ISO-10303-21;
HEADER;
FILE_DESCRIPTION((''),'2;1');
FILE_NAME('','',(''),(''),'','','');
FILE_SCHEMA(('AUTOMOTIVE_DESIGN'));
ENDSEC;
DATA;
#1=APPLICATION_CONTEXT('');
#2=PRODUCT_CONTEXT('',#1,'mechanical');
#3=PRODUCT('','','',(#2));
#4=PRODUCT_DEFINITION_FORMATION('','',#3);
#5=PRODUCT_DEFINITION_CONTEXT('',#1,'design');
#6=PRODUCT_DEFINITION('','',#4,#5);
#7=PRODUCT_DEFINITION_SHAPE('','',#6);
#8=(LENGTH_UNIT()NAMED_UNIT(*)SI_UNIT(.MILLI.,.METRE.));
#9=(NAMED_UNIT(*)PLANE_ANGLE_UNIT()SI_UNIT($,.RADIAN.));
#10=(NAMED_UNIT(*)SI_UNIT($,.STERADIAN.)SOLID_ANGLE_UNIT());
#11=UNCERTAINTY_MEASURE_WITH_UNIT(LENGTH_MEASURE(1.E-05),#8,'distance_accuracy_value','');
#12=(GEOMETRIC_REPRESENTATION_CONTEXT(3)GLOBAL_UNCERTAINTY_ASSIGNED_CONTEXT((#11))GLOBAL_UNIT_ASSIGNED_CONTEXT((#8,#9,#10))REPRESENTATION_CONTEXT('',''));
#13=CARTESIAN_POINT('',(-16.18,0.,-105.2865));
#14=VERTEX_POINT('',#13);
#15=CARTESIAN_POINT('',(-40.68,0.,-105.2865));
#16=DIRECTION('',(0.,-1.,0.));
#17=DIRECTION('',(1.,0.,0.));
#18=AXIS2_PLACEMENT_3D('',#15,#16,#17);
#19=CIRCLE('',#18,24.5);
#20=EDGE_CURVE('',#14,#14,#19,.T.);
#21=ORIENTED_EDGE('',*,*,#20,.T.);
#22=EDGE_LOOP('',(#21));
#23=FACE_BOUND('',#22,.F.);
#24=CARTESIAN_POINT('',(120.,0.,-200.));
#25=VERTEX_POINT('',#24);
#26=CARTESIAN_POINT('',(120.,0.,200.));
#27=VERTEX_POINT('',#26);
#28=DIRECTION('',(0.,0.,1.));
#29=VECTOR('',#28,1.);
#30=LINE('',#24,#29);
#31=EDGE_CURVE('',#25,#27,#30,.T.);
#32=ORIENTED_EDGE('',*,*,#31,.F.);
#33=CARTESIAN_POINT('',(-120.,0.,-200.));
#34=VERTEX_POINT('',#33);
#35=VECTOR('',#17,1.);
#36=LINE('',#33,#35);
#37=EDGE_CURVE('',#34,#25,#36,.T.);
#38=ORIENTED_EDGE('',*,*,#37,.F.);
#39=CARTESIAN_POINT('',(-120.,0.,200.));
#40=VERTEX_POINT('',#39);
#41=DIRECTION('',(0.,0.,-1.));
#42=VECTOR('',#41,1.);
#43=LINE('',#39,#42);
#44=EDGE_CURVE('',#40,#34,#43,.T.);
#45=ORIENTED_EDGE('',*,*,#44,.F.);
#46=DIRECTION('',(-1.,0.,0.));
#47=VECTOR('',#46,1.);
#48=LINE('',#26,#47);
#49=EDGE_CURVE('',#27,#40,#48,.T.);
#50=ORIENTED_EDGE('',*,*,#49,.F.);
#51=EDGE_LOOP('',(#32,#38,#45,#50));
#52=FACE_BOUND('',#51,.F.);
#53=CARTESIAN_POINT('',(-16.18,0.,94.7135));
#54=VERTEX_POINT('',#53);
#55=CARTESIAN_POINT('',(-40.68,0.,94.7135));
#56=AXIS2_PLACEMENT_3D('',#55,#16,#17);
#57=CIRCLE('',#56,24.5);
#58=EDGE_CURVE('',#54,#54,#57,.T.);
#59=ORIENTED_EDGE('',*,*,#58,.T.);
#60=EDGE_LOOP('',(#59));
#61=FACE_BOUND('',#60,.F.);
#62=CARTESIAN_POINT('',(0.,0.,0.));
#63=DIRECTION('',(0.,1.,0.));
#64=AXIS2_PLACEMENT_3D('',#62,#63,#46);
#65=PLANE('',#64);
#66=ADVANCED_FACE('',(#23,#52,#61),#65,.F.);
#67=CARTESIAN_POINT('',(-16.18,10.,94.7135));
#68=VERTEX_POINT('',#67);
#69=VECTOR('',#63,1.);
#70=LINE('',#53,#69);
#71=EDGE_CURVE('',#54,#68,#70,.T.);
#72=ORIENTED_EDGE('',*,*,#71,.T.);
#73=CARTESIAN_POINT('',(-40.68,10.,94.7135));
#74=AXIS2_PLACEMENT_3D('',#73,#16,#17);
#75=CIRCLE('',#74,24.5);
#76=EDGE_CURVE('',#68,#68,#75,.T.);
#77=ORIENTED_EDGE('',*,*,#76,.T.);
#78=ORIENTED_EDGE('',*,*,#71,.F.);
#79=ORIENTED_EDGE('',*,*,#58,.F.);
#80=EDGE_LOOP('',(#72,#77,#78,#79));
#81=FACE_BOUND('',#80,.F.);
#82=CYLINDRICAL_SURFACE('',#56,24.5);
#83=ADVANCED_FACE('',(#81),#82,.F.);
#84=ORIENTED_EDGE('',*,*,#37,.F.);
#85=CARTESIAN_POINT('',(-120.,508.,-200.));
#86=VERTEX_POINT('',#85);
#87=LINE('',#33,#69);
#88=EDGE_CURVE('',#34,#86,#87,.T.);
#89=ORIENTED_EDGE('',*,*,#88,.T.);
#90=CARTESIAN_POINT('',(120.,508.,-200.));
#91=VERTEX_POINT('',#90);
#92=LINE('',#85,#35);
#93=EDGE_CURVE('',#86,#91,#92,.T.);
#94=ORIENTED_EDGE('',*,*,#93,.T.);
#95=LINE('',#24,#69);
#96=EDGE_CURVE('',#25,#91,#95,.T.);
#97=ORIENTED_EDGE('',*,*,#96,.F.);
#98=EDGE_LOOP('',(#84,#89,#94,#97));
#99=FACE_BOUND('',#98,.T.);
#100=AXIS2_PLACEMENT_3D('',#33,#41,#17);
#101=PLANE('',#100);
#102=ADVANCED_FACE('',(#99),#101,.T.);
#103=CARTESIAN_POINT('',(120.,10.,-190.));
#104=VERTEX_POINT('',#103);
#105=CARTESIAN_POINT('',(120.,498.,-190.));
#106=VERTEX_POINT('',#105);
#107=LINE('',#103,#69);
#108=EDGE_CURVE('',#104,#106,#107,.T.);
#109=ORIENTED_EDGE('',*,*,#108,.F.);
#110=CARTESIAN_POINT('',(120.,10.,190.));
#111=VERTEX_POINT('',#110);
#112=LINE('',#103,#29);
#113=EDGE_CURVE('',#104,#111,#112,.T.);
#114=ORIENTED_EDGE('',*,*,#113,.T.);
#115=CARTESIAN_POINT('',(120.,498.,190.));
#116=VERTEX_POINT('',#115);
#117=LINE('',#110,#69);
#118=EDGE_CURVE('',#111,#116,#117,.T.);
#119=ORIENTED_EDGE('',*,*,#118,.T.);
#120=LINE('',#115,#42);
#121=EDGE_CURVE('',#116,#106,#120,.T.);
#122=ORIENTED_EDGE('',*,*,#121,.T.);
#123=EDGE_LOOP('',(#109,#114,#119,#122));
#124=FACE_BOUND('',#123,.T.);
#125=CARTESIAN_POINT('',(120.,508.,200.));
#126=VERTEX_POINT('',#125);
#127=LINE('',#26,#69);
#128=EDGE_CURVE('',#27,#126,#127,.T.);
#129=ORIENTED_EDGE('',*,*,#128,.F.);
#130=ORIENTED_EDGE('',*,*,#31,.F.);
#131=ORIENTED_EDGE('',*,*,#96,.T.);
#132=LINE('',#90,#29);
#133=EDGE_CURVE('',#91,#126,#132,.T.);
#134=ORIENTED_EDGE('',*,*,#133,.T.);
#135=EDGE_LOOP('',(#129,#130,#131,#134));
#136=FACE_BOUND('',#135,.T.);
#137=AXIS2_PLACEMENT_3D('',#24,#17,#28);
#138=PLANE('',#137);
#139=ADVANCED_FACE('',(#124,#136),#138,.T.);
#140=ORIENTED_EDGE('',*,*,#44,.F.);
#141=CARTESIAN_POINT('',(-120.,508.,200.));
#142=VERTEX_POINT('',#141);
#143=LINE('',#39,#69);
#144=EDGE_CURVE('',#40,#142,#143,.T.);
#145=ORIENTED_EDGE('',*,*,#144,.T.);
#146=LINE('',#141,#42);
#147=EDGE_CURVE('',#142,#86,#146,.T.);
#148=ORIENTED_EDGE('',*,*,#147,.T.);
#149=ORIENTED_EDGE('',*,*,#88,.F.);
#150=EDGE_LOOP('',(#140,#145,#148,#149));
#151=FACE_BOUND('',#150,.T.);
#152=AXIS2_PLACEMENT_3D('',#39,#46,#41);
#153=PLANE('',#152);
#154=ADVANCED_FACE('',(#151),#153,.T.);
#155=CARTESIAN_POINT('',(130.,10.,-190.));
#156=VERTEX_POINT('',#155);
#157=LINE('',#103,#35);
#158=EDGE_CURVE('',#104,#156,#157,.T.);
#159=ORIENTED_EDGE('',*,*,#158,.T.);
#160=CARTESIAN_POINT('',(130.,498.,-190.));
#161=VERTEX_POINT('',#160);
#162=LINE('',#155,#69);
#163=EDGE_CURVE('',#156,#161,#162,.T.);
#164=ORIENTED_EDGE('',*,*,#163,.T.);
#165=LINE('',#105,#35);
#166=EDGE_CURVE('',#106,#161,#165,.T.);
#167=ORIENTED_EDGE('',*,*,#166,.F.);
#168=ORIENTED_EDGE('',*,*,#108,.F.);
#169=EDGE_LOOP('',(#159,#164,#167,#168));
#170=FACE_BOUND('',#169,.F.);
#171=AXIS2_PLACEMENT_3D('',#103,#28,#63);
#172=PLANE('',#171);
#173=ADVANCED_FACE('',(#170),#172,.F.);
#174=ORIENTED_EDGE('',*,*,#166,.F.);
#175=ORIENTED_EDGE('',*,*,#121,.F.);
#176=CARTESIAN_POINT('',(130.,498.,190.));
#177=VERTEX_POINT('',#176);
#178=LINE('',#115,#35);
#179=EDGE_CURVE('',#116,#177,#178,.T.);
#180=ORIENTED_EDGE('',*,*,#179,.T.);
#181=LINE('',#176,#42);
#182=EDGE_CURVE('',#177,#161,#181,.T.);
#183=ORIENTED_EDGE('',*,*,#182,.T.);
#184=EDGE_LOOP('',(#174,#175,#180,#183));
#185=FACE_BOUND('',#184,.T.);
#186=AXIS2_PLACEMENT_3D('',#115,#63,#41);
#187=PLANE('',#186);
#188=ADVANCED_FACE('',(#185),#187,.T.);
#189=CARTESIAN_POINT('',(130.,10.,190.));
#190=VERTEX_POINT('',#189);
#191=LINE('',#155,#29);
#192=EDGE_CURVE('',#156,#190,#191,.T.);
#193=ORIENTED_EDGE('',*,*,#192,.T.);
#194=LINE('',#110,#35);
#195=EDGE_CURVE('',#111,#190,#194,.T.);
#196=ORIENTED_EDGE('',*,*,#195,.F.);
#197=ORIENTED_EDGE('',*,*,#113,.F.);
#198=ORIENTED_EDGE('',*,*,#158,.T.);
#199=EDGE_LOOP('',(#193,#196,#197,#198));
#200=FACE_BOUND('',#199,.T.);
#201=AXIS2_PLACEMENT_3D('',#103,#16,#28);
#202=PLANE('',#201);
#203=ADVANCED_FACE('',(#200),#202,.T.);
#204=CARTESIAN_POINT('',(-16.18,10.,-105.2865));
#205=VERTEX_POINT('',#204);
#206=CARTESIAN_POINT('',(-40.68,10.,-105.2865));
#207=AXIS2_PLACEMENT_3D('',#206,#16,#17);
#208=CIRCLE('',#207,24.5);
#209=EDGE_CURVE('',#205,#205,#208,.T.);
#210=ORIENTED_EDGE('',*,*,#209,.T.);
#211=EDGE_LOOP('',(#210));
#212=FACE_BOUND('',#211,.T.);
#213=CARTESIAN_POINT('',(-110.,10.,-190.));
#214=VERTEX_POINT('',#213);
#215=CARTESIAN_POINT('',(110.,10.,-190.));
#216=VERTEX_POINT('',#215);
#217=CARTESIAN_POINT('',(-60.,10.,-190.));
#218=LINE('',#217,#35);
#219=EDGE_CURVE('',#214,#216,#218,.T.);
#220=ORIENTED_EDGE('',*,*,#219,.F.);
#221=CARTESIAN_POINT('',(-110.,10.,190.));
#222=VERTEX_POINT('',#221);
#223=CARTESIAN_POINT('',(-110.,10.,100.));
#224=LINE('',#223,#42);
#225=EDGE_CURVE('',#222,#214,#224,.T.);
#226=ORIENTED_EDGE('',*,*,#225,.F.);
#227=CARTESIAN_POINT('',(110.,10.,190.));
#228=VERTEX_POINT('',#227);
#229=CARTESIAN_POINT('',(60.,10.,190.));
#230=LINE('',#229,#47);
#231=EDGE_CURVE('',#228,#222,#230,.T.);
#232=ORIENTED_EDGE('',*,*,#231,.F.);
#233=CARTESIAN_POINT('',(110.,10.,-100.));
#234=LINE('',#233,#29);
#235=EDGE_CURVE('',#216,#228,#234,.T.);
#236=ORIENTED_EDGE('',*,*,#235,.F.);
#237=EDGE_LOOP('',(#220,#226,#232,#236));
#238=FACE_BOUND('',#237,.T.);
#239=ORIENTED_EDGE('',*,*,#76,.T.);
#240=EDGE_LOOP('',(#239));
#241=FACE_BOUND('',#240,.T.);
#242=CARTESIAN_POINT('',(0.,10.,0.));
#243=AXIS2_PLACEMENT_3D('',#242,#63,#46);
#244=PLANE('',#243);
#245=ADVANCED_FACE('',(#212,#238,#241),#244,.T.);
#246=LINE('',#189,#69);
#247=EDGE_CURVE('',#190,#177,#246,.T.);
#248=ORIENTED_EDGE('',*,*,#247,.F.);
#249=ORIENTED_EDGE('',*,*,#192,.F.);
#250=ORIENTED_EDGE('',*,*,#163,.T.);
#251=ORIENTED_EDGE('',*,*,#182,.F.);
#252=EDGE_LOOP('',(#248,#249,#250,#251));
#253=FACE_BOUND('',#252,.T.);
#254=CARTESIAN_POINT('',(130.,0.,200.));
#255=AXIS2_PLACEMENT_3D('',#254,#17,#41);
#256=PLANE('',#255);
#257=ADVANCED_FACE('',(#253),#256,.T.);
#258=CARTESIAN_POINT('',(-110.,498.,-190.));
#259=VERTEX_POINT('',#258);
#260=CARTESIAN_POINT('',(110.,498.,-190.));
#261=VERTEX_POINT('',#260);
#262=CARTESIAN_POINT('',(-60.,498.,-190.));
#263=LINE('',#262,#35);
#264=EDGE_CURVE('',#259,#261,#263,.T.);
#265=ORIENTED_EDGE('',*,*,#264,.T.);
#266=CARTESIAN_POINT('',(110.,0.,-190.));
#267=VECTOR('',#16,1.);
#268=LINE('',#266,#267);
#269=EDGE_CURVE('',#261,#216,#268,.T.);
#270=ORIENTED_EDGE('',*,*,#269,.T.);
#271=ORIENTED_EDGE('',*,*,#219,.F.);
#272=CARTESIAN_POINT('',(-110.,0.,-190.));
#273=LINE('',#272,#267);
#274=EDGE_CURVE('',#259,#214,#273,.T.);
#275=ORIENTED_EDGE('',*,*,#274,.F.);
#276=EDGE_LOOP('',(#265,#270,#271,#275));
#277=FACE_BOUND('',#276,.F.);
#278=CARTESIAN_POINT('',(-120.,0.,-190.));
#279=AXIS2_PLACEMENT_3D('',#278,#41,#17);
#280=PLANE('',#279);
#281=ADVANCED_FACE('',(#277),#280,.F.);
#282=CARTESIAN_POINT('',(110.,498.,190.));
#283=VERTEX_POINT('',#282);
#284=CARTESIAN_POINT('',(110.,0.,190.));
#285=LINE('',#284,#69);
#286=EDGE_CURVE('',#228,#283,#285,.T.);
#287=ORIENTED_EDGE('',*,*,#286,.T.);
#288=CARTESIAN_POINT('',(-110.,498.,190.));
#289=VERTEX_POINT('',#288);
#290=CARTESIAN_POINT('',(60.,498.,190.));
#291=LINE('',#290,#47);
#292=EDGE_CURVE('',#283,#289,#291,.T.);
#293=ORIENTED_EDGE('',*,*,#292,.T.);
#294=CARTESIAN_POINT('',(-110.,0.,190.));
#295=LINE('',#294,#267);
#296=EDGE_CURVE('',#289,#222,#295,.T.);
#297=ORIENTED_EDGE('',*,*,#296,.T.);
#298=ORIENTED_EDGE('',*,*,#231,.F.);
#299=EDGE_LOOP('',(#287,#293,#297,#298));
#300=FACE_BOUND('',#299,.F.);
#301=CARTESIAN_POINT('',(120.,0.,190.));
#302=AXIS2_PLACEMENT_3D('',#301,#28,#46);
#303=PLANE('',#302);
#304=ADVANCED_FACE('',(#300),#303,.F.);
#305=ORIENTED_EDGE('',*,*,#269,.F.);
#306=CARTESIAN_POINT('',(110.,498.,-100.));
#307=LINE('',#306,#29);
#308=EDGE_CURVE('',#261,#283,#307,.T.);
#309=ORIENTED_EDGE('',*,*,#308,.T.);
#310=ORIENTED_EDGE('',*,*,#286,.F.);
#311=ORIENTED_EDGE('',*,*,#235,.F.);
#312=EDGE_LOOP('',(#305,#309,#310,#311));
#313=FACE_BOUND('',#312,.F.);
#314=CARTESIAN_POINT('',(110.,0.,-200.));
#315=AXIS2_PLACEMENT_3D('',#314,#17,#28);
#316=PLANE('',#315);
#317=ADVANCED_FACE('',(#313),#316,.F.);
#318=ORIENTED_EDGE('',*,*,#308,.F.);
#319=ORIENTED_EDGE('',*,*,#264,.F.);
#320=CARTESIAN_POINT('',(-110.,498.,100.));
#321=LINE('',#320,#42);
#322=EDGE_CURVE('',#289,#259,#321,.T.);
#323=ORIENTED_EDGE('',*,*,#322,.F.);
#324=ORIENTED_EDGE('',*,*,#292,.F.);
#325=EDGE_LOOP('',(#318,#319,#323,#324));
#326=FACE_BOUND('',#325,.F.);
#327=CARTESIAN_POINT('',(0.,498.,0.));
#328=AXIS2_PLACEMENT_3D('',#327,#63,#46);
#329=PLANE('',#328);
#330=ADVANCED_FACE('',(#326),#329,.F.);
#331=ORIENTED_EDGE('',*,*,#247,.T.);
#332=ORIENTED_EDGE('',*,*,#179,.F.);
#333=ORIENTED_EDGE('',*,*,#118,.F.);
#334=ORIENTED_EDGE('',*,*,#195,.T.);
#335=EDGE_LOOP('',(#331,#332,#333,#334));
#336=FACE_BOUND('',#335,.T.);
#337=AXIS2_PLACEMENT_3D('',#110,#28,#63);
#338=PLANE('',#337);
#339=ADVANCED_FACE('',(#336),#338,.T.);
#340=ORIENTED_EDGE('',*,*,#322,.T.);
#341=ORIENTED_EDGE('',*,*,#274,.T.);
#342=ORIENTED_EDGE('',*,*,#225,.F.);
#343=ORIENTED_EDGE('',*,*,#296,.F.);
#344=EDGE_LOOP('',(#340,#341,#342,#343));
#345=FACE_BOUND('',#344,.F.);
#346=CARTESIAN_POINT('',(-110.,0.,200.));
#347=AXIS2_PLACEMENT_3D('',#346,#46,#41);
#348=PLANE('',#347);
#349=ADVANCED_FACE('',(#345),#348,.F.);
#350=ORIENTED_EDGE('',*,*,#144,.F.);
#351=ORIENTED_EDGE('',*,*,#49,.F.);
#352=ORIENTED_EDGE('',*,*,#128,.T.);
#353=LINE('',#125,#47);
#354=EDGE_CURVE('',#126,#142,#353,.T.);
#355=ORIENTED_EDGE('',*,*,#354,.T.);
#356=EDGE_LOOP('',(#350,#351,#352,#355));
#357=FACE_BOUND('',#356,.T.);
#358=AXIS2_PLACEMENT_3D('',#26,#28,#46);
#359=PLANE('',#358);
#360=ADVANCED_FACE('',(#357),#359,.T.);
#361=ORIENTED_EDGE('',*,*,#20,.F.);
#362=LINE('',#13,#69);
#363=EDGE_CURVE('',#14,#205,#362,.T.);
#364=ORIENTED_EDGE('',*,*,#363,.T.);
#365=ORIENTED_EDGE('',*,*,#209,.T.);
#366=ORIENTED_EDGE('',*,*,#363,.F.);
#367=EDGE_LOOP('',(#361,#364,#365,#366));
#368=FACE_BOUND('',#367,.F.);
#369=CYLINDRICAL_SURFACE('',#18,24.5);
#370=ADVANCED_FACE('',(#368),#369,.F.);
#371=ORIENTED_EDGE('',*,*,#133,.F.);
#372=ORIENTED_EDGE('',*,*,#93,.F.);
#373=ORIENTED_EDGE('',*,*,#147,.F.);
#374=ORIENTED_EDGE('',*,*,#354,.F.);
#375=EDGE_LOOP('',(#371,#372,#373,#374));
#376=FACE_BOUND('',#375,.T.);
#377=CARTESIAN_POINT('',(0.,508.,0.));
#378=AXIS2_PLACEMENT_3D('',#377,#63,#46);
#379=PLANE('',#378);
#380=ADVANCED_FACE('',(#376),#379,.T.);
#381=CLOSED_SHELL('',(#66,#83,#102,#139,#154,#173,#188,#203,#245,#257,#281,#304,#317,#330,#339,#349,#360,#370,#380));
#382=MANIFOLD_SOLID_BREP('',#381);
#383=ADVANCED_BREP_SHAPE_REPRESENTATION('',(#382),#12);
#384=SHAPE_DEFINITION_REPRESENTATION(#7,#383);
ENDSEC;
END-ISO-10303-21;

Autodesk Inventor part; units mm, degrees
ref_plane "YZ Plane" through (0, 0, 0) normal (1, 0, 0) x (0, 1, 0)
ref_plane "XZ Plane" through (0, 0, 0) normal (0, 1, 0) x (-1, 0, 0)
ref_plane "XY Plane" through (0, 0, 0) normal (0, 0, 1) x (1, 0, 0)
sketch "Sketch1" plane through (0, 0, 0) normal (0, 1, 0) x (-1, 0, 0)
  line L0 (-120, 200) -> (120, 200)
  line L1 (120, 200) -> (120, -200)
  line L2 (120, -200) -> (-120, -200)
  line L3 (-120, -200) -> (-120, 200)
  line L4 (-120, 200) -> (120, -200) construction
  line L5 (120, 200) -> (-120, -200) construction
  point P0 (0, 0)
  dimension "d0" = 400
  dimension "d1" = 240
extrude "Extrusion1" add sketch "Sketch1" along normal blind 508
sketch "Sketch2" plane through (0, 0, 0) normal (0, -1, 0) x (1, 0, 0)
  point P0 (0, 0)
sketch "Sketch3" plane through (0, 0, 0) normal (0, -1, 0) x (1, 0, 0)
  circle A0 centre (-40.68, 94.7135) radius 24.5
  circle A1 centre (-40.68, -105.2865) radius 24.5
  line L0 (-120, 200) -> (-120, -200) projected
  point P0 (0, 0)
  dimension "d4" = 49
  dimension "d5" = 49
  dimension "d6" = 200
  dimension "d17" = 79.32
  dimension "d18" = 79.32
shell "Shell1" thickness 10 removed faces 0
extrude "Extrusion2" cut sketch "Sketch3" against normal blind 10
sketch "Sketch4" plane through (120, 0, 200) normal (1, 0, 0) x (0, 0, -1)
  line L0 (10, 498) -> (390, 498) projected
  line L1 (390, 10) -> (390, 498) projected
  line L2 (10, 498) -> (390, 498)
  line L3 (390, 498) -> (390, 10)
  line L4 (390, 10) -> (10, 10)
  line L5 (10, 10) -> (10, 498)
  point P0 (200, 0)
extrude "Extrusion3" add sketch "Sketch4" along normal blind 10
properties part number "powerBox"
